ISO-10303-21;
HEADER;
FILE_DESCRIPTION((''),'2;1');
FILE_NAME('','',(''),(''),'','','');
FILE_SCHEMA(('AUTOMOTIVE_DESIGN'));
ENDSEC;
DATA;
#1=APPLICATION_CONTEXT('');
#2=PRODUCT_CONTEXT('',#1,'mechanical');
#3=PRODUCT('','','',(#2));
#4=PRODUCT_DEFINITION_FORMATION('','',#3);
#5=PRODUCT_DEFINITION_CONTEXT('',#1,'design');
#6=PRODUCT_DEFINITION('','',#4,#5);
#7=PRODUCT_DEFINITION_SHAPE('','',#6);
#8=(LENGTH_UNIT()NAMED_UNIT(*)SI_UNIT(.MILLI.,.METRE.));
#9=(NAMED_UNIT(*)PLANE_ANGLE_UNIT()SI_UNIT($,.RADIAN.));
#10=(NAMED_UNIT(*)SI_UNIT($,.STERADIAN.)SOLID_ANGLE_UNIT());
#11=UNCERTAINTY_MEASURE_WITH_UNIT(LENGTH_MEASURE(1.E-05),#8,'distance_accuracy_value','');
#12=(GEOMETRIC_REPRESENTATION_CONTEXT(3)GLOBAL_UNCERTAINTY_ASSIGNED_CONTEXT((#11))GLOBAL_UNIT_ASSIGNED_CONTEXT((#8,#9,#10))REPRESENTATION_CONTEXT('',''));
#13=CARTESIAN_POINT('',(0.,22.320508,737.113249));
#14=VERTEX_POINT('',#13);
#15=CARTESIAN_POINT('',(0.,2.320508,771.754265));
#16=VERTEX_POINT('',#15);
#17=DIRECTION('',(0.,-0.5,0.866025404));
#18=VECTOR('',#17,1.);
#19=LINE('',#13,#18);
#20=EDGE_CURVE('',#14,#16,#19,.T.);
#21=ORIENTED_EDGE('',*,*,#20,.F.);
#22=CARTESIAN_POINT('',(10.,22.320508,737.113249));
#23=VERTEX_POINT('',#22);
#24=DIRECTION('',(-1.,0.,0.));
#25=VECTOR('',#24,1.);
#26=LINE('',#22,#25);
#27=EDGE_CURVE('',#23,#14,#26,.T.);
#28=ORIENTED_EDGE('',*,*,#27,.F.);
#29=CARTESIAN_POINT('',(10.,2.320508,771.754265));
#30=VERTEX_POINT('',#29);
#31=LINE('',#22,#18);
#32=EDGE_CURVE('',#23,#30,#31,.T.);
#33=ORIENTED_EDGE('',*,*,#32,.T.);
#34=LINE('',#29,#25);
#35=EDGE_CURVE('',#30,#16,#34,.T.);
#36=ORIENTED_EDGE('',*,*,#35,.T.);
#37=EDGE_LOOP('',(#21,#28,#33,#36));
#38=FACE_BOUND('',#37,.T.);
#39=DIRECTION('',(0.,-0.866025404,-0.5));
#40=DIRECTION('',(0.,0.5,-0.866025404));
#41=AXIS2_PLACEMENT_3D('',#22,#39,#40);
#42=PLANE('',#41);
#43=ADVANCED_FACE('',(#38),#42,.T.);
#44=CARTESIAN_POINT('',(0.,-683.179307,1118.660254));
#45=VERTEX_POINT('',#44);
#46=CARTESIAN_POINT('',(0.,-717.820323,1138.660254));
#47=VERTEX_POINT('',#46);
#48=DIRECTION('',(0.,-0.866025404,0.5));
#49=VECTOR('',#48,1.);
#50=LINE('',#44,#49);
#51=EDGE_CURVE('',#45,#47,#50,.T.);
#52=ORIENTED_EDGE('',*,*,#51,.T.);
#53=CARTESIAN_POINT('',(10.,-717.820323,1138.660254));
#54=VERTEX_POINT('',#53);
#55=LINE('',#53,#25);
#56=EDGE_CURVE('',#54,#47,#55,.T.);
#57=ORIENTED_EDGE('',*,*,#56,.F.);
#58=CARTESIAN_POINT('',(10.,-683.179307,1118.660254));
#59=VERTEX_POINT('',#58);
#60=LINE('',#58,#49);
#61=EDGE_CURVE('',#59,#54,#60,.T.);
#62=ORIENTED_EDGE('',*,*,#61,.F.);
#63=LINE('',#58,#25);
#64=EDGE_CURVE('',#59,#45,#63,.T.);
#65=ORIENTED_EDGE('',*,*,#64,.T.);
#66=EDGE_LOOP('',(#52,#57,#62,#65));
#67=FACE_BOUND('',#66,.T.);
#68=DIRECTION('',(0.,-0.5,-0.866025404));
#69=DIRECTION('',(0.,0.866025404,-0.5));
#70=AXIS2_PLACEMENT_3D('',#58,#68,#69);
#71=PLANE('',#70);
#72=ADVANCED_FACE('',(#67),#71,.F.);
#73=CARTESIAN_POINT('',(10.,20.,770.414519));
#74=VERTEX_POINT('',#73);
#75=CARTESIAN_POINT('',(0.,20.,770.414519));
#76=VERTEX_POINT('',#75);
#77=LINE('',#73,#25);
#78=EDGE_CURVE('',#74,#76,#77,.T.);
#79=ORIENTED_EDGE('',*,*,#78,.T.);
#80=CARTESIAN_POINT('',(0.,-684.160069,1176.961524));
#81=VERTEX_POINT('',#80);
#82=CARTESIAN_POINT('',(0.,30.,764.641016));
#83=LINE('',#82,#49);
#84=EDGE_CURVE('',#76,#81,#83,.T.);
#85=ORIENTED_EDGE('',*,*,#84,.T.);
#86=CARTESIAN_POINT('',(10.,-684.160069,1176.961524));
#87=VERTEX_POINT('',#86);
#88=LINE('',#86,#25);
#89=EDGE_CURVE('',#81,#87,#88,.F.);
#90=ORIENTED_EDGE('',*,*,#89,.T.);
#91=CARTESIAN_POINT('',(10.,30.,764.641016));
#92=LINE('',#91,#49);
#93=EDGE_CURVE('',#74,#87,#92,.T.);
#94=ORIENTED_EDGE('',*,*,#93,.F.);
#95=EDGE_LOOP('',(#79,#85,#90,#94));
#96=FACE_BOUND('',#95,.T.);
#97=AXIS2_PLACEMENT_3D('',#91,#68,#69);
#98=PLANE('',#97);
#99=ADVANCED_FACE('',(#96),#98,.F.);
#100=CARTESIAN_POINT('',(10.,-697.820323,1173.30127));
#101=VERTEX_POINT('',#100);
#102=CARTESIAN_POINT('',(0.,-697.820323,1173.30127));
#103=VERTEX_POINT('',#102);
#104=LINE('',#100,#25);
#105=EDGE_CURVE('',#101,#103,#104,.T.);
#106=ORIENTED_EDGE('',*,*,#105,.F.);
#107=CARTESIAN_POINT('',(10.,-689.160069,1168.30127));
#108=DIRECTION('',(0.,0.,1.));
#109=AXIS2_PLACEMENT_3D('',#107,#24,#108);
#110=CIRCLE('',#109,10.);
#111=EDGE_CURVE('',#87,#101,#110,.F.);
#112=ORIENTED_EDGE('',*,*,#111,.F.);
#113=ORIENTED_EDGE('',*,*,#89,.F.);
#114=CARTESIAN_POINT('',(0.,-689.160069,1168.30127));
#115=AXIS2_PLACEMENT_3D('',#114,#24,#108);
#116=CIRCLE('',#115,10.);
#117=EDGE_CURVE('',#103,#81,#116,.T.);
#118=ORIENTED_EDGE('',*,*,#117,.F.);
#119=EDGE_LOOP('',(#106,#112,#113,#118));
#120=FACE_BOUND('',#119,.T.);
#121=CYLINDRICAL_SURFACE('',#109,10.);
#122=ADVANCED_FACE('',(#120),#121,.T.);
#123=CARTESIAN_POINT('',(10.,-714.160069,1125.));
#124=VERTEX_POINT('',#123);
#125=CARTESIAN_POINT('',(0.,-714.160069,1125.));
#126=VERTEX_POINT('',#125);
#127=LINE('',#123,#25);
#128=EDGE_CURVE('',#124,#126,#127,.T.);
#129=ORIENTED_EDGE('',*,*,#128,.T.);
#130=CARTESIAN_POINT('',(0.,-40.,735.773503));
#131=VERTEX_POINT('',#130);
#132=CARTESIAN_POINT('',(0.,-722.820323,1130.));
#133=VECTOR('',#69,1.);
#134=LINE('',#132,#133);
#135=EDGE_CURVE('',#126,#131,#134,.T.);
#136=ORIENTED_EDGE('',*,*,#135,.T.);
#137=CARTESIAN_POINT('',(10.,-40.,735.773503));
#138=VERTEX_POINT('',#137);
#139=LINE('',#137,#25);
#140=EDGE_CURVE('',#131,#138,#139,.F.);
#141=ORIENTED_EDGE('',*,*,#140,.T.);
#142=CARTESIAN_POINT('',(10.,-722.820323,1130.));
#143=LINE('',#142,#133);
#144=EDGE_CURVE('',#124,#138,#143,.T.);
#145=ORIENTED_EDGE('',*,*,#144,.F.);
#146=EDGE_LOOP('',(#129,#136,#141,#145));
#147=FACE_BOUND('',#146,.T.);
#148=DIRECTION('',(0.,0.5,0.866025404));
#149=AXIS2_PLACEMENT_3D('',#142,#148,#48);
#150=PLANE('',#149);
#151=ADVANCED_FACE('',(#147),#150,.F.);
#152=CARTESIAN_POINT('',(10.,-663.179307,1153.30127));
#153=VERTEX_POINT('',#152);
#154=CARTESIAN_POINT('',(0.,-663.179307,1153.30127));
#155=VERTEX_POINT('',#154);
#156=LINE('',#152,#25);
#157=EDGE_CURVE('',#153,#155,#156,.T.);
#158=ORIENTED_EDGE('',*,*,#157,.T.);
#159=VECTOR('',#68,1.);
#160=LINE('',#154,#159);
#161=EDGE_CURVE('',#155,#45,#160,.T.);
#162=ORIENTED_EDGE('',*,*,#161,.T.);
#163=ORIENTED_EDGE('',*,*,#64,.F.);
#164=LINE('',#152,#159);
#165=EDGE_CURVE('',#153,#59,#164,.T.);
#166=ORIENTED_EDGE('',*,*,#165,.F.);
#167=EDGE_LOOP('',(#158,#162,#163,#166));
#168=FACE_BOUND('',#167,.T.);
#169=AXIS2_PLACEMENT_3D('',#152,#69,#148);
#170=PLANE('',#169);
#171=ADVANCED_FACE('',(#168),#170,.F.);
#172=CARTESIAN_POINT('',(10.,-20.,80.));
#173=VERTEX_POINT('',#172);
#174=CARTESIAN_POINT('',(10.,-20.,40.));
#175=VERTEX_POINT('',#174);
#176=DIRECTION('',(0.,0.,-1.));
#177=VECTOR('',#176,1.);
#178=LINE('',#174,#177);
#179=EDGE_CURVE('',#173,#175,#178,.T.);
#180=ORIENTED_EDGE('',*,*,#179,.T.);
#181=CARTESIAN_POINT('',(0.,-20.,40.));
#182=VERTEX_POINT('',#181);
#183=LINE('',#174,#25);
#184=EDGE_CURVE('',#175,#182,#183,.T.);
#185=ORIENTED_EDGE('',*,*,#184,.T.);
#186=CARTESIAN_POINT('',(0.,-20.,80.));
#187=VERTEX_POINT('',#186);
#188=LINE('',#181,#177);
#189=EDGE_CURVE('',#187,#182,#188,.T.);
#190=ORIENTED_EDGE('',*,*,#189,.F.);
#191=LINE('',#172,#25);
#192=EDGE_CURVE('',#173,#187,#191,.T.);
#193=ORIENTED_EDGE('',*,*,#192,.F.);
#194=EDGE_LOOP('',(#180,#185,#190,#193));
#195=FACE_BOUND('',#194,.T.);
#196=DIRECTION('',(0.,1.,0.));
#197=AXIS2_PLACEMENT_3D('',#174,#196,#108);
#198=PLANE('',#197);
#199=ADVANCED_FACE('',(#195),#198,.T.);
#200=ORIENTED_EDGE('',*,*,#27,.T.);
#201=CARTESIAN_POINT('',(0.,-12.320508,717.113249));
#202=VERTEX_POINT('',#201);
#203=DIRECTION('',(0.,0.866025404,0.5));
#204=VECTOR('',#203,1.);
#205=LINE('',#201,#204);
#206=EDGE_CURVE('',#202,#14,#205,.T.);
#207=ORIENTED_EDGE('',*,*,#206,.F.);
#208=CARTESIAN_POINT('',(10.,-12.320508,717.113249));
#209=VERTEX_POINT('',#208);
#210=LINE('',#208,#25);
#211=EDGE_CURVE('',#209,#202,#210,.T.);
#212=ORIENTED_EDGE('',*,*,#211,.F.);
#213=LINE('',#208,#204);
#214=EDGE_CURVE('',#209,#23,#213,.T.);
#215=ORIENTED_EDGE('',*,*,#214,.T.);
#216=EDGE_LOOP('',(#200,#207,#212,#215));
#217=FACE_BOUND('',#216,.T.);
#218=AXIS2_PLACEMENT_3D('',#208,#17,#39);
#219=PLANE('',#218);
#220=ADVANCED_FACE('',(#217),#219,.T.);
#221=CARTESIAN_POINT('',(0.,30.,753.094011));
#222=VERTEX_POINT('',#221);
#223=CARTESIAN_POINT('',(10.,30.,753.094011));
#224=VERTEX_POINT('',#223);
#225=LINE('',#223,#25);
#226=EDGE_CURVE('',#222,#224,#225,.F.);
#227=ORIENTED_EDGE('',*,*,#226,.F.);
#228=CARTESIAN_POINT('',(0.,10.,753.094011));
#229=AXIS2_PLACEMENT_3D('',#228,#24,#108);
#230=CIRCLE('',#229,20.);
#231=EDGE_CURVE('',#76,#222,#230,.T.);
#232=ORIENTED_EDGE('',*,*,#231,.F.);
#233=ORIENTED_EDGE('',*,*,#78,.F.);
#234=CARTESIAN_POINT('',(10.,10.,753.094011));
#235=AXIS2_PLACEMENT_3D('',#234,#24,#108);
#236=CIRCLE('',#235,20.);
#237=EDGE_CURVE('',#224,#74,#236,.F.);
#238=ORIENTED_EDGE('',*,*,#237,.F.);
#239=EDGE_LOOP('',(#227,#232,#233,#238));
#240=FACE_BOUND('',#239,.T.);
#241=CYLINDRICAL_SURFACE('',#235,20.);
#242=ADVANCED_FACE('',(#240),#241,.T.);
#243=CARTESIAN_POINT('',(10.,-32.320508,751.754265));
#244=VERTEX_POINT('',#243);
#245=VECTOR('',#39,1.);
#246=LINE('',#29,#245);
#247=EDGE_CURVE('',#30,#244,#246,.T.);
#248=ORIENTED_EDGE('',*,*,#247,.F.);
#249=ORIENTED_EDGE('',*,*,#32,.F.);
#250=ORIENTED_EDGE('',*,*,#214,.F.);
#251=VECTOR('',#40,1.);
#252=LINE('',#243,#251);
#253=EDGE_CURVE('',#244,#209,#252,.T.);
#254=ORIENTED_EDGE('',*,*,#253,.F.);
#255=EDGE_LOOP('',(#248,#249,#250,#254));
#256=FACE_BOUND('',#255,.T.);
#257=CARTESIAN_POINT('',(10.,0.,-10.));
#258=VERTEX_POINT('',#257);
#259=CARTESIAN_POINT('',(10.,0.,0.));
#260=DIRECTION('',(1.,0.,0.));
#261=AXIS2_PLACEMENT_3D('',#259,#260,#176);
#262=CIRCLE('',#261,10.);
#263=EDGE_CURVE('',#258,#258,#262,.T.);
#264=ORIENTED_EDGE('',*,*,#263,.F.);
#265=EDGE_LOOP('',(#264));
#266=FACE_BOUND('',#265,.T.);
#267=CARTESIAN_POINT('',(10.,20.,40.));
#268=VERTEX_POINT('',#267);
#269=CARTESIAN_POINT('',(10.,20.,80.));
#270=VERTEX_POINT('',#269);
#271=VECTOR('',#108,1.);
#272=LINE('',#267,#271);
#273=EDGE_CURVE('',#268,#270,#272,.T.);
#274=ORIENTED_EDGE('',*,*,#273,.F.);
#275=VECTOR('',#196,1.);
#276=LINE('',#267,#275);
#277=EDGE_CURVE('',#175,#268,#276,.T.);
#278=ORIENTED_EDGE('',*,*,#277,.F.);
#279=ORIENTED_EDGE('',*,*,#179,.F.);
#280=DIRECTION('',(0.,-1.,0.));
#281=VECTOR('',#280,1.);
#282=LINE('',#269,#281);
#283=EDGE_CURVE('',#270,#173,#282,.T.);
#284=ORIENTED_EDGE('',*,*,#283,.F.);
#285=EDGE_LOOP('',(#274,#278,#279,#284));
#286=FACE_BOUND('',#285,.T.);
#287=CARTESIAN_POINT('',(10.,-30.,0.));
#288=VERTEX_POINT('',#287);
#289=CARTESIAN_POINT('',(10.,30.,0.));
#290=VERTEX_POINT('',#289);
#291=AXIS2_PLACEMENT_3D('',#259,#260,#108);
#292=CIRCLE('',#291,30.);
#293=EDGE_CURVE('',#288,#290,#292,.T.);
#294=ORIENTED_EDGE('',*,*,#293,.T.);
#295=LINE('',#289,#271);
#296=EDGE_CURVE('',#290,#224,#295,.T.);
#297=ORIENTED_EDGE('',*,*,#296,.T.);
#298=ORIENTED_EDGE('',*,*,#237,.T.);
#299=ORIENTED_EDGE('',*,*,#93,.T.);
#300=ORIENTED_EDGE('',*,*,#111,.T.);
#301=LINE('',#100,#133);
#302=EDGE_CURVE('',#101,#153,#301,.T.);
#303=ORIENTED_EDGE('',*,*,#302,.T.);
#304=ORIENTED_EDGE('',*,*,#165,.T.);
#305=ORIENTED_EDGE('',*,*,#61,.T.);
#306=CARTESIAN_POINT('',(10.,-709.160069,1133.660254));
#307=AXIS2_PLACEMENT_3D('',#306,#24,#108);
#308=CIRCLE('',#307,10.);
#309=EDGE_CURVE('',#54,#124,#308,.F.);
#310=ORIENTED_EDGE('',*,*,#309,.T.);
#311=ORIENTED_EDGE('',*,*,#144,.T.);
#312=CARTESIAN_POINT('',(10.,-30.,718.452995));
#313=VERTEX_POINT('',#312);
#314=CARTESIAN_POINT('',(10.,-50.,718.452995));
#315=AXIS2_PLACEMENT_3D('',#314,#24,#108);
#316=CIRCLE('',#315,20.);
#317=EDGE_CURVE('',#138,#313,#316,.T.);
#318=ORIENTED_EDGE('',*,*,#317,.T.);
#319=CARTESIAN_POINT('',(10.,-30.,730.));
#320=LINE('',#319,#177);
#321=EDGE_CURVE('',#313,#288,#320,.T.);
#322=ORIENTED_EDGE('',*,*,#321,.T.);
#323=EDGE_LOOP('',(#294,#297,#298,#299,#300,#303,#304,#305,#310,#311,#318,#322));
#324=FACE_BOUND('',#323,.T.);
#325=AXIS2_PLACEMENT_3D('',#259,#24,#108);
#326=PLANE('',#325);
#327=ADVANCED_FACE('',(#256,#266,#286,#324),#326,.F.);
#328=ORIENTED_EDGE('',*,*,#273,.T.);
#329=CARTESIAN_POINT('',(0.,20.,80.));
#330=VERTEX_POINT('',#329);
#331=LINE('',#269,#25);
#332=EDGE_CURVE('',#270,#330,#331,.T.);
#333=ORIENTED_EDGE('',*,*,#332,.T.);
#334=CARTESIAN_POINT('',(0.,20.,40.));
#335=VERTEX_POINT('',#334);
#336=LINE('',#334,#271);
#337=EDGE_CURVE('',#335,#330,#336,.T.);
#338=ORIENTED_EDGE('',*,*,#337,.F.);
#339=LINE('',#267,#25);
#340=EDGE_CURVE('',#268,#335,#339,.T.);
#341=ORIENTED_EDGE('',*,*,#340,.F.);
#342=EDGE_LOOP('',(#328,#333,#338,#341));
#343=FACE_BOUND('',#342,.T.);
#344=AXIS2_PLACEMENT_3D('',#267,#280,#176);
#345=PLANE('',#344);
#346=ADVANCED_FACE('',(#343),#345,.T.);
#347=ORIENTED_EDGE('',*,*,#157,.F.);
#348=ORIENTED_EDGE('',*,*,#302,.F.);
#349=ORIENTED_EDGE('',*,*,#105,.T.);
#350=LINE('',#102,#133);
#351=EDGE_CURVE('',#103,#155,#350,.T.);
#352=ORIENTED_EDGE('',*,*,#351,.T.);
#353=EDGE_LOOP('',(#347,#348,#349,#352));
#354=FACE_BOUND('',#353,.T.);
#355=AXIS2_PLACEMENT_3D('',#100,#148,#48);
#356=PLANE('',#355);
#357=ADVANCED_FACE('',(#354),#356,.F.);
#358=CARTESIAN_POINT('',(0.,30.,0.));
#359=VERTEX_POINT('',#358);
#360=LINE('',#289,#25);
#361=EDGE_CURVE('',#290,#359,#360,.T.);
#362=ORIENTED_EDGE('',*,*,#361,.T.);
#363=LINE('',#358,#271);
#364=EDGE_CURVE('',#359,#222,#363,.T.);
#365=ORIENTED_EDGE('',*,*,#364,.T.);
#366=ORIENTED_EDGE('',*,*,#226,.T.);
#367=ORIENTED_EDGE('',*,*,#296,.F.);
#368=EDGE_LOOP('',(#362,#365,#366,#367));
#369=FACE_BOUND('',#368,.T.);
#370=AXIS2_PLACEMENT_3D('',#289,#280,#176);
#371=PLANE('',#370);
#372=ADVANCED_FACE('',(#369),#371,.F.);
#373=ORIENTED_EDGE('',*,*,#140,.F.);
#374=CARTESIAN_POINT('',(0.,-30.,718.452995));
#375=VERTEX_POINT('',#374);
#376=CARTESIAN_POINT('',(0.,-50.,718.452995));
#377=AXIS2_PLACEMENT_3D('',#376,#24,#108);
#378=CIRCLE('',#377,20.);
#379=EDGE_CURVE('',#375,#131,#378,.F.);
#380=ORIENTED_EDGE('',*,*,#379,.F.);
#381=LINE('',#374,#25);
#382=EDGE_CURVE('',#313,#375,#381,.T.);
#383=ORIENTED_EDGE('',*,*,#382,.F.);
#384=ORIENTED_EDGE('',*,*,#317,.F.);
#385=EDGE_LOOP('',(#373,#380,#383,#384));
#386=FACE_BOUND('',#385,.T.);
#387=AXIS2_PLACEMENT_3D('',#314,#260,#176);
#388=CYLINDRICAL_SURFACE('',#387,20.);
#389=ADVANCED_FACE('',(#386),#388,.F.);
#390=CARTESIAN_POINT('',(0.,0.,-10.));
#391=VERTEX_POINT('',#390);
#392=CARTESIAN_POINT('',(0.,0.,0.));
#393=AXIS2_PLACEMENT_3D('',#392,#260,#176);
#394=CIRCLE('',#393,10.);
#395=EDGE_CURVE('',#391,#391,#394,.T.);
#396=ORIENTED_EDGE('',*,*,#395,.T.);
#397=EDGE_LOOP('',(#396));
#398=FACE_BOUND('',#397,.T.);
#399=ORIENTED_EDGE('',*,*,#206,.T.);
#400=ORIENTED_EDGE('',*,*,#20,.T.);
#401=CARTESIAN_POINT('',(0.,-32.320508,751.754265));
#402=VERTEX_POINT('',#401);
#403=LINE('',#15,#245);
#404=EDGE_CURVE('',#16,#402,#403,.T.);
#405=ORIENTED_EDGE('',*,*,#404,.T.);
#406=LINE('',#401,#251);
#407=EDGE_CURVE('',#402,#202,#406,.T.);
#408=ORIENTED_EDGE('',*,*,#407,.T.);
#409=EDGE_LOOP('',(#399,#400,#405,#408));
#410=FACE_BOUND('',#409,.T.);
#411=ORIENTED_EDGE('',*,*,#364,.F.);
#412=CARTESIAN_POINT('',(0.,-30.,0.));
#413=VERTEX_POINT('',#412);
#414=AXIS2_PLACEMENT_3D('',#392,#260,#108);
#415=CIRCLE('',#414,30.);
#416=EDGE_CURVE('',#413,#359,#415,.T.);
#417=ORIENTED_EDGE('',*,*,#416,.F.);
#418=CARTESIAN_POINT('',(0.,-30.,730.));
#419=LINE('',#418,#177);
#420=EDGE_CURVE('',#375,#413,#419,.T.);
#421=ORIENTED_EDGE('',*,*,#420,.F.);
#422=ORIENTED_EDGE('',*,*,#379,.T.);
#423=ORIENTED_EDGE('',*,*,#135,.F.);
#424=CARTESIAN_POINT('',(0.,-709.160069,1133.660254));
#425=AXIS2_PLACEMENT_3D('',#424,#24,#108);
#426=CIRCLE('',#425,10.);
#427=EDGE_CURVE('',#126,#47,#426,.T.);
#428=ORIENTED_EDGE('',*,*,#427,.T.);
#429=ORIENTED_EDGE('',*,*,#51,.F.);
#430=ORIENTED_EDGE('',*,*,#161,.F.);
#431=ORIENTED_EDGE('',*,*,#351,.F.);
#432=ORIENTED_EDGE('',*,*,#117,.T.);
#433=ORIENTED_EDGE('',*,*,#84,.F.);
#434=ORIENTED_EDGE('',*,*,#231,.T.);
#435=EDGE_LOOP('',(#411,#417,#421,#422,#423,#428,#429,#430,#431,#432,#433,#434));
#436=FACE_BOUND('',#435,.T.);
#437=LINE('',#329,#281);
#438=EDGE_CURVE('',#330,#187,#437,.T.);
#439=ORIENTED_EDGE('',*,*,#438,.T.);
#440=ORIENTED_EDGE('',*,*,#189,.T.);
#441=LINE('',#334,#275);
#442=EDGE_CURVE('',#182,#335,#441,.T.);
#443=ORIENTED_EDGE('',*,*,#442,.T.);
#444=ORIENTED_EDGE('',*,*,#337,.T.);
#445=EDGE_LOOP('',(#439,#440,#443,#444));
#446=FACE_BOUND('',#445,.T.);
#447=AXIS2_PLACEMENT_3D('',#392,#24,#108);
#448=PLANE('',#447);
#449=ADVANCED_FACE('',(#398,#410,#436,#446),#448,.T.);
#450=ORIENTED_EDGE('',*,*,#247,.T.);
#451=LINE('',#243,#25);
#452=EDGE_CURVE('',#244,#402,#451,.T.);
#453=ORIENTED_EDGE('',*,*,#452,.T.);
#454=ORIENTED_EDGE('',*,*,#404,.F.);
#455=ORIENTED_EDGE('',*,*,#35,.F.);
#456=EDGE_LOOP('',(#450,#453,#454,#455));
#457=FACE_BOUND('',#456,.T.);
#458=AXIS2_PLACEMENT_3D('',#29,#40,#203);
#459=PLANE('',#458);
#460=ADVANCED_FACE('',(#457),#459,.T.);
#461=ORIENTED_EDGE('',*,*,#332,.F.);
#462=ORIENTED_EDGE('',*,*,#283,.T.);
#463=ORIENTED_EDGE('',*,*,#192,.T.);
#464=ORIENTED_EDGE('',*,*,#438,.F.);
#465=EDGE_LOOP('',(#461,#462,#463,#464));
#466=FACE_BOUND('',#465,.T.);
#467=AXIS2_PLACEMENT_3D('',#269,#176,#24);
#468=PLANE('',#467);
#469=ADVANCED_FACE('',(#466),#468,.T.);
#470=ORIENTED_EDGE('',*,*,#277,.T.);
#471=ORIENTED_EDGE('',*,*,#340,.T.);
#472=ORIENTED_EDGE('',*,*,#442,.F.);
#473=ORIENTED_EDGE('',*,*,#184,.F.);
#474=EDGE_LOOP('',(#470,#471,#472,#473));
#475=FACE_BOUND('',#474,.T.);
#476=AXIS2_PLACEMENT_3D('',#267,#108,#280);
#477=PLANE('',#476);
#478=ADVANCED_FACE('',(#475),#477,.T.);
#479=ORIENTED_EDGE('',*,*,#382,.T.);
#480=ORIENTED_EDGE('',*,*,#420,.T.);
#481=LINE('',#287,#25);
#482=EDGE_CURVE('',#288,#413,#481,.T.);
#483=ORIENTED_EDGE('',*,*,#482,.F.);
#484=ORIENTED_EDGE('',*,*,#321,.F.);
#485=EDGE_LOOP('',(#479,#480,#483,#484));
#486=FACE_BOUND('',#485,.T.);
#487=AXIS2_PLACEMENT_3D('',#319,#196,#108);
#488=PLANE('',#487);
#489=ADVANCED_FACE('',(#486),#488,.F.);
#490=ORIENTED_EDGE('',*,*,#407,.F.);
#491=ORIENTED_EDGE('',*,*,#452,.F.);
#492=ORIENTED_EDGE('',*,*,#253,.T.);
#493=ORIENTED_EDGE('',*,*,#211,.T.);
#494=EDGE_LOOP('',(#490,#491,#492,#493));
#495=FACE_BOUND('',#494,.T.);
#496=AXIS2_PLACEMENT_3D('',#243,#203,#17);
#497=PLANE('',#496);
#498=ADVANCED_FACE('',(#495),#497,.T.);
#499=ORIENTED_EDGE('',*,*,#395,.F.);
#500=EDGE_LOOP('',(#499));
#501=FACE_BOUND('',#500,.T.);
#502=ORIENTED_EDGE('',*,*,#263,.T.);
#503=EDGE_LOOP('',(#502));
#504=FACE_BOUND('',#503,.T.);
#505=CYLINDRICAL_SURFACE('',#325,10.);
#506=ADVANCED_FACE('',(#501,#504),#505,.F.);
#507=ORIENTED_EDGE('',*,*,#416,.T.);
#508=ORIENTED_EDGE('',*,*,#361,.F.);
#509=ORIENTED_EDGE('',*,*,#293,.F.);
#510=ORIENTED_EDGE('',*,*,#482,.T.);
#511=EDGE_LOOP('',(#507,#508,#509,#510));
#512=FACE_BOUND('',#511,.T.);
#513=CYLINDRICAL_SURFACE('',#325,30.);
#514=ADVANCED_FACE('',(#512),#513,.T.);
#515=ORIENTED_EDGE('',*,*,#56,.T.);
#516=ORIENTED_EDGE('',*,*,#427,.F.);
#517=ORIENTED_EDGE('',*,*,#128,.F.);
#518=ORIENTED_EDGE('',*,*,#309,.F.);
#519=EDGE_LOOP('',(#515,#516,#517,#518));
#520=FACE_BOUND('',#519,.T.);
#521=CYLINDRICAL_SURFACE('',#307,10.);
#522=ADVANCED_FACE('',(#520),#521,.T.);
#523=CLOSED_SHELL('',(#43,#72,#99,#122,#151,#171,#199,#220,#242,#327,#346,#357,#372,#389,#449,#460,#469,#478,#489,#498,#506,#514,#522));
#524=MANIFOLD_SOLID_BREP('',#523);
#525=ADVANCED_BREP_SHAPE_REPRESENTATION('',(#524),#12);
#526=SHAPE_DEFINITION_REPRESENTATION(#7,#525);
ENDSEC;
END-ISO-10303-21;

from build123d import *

# Parameters (mm, degrees)
ESQUISSE1_R        = 10
ESQUISSE1_W        = 40
ESQUISSE1_H        = 40
BOSS_EXTRU_1_DEPTH = 10
CONG_1_R           = 10
CONG_2_R           = 20


with BuildPart() as part:
    # Esquisse1 → Boss.-Extru.1 (new body)
    with BuildSketch(Plane(origin=(0, 0, 0), x_dir=(0, 0, -1), z_dir=(1, 0, 0))):
        with BuildLine():
            Line((0, 30), (-764.641016151, 30))
            Line((-764.641016151, 30), (-1181.961524227, -692.820323028))
            Line((-1181.961524227, -692.820323028), (-1173.301270189, -697.820323028))
            Line((-1173.301270189, -697.820323028), (-1153.301270189, -663.179306876))
            Line((-1153.301270189, -663.179306876), (-1118.660254038, -683.179306876))
            Line((-1118.660254038, -683.179306876), (-1138.660254038, -717.820323028))
            Line((-1138.660254038, -717.820323028), (-1130, -722.820323028))
            Line((-1130, -722.820323028), (-730, -30))
            Line((-730, -30), (0, -30))
            ThreePointArc((0, -30), (30, 0), (0, 30))
        make_face()
        Circle(ESQUISSE1_R, mode=Mode.SUBTRACT)
        with Locations((-60, 0)):
            Rectangle(ESQUISSE1_W, ESQUISSE1_H, mode=Mode.SUBTRACT)
        Polygon((-737.113248654, 22.320508076), (-771.754264805, 2.320508076), (-751.754264805, -32.320508076), (-717.113248654, -12.320508076), align=None, mode=Mode.SUBTRACT)
    extrude(amount=BOSS_EXTRU_1_DEPTH)

    # Congé1
    cong_1_edges = [part.edges().sort_by_distance(p)[0] for p in [
        (5, -692.820323028, 1181.961524227),
        (5, -722.820323028, 1130),
    ]]
    fillet(cong_1_edges, radius=CONG_1_R - 0.0001)  # a hair under: the kernel refuses the full size

    # Congé2
    cong_2_edges = [part.edges().sort_by_distance(p)[0] for p in [
        (5, -30, 730),
        (5, 30, 764.641016151),
    ]]
    fillet(cong_2_edges, radius=CONG_2_R)


solid = part.part
